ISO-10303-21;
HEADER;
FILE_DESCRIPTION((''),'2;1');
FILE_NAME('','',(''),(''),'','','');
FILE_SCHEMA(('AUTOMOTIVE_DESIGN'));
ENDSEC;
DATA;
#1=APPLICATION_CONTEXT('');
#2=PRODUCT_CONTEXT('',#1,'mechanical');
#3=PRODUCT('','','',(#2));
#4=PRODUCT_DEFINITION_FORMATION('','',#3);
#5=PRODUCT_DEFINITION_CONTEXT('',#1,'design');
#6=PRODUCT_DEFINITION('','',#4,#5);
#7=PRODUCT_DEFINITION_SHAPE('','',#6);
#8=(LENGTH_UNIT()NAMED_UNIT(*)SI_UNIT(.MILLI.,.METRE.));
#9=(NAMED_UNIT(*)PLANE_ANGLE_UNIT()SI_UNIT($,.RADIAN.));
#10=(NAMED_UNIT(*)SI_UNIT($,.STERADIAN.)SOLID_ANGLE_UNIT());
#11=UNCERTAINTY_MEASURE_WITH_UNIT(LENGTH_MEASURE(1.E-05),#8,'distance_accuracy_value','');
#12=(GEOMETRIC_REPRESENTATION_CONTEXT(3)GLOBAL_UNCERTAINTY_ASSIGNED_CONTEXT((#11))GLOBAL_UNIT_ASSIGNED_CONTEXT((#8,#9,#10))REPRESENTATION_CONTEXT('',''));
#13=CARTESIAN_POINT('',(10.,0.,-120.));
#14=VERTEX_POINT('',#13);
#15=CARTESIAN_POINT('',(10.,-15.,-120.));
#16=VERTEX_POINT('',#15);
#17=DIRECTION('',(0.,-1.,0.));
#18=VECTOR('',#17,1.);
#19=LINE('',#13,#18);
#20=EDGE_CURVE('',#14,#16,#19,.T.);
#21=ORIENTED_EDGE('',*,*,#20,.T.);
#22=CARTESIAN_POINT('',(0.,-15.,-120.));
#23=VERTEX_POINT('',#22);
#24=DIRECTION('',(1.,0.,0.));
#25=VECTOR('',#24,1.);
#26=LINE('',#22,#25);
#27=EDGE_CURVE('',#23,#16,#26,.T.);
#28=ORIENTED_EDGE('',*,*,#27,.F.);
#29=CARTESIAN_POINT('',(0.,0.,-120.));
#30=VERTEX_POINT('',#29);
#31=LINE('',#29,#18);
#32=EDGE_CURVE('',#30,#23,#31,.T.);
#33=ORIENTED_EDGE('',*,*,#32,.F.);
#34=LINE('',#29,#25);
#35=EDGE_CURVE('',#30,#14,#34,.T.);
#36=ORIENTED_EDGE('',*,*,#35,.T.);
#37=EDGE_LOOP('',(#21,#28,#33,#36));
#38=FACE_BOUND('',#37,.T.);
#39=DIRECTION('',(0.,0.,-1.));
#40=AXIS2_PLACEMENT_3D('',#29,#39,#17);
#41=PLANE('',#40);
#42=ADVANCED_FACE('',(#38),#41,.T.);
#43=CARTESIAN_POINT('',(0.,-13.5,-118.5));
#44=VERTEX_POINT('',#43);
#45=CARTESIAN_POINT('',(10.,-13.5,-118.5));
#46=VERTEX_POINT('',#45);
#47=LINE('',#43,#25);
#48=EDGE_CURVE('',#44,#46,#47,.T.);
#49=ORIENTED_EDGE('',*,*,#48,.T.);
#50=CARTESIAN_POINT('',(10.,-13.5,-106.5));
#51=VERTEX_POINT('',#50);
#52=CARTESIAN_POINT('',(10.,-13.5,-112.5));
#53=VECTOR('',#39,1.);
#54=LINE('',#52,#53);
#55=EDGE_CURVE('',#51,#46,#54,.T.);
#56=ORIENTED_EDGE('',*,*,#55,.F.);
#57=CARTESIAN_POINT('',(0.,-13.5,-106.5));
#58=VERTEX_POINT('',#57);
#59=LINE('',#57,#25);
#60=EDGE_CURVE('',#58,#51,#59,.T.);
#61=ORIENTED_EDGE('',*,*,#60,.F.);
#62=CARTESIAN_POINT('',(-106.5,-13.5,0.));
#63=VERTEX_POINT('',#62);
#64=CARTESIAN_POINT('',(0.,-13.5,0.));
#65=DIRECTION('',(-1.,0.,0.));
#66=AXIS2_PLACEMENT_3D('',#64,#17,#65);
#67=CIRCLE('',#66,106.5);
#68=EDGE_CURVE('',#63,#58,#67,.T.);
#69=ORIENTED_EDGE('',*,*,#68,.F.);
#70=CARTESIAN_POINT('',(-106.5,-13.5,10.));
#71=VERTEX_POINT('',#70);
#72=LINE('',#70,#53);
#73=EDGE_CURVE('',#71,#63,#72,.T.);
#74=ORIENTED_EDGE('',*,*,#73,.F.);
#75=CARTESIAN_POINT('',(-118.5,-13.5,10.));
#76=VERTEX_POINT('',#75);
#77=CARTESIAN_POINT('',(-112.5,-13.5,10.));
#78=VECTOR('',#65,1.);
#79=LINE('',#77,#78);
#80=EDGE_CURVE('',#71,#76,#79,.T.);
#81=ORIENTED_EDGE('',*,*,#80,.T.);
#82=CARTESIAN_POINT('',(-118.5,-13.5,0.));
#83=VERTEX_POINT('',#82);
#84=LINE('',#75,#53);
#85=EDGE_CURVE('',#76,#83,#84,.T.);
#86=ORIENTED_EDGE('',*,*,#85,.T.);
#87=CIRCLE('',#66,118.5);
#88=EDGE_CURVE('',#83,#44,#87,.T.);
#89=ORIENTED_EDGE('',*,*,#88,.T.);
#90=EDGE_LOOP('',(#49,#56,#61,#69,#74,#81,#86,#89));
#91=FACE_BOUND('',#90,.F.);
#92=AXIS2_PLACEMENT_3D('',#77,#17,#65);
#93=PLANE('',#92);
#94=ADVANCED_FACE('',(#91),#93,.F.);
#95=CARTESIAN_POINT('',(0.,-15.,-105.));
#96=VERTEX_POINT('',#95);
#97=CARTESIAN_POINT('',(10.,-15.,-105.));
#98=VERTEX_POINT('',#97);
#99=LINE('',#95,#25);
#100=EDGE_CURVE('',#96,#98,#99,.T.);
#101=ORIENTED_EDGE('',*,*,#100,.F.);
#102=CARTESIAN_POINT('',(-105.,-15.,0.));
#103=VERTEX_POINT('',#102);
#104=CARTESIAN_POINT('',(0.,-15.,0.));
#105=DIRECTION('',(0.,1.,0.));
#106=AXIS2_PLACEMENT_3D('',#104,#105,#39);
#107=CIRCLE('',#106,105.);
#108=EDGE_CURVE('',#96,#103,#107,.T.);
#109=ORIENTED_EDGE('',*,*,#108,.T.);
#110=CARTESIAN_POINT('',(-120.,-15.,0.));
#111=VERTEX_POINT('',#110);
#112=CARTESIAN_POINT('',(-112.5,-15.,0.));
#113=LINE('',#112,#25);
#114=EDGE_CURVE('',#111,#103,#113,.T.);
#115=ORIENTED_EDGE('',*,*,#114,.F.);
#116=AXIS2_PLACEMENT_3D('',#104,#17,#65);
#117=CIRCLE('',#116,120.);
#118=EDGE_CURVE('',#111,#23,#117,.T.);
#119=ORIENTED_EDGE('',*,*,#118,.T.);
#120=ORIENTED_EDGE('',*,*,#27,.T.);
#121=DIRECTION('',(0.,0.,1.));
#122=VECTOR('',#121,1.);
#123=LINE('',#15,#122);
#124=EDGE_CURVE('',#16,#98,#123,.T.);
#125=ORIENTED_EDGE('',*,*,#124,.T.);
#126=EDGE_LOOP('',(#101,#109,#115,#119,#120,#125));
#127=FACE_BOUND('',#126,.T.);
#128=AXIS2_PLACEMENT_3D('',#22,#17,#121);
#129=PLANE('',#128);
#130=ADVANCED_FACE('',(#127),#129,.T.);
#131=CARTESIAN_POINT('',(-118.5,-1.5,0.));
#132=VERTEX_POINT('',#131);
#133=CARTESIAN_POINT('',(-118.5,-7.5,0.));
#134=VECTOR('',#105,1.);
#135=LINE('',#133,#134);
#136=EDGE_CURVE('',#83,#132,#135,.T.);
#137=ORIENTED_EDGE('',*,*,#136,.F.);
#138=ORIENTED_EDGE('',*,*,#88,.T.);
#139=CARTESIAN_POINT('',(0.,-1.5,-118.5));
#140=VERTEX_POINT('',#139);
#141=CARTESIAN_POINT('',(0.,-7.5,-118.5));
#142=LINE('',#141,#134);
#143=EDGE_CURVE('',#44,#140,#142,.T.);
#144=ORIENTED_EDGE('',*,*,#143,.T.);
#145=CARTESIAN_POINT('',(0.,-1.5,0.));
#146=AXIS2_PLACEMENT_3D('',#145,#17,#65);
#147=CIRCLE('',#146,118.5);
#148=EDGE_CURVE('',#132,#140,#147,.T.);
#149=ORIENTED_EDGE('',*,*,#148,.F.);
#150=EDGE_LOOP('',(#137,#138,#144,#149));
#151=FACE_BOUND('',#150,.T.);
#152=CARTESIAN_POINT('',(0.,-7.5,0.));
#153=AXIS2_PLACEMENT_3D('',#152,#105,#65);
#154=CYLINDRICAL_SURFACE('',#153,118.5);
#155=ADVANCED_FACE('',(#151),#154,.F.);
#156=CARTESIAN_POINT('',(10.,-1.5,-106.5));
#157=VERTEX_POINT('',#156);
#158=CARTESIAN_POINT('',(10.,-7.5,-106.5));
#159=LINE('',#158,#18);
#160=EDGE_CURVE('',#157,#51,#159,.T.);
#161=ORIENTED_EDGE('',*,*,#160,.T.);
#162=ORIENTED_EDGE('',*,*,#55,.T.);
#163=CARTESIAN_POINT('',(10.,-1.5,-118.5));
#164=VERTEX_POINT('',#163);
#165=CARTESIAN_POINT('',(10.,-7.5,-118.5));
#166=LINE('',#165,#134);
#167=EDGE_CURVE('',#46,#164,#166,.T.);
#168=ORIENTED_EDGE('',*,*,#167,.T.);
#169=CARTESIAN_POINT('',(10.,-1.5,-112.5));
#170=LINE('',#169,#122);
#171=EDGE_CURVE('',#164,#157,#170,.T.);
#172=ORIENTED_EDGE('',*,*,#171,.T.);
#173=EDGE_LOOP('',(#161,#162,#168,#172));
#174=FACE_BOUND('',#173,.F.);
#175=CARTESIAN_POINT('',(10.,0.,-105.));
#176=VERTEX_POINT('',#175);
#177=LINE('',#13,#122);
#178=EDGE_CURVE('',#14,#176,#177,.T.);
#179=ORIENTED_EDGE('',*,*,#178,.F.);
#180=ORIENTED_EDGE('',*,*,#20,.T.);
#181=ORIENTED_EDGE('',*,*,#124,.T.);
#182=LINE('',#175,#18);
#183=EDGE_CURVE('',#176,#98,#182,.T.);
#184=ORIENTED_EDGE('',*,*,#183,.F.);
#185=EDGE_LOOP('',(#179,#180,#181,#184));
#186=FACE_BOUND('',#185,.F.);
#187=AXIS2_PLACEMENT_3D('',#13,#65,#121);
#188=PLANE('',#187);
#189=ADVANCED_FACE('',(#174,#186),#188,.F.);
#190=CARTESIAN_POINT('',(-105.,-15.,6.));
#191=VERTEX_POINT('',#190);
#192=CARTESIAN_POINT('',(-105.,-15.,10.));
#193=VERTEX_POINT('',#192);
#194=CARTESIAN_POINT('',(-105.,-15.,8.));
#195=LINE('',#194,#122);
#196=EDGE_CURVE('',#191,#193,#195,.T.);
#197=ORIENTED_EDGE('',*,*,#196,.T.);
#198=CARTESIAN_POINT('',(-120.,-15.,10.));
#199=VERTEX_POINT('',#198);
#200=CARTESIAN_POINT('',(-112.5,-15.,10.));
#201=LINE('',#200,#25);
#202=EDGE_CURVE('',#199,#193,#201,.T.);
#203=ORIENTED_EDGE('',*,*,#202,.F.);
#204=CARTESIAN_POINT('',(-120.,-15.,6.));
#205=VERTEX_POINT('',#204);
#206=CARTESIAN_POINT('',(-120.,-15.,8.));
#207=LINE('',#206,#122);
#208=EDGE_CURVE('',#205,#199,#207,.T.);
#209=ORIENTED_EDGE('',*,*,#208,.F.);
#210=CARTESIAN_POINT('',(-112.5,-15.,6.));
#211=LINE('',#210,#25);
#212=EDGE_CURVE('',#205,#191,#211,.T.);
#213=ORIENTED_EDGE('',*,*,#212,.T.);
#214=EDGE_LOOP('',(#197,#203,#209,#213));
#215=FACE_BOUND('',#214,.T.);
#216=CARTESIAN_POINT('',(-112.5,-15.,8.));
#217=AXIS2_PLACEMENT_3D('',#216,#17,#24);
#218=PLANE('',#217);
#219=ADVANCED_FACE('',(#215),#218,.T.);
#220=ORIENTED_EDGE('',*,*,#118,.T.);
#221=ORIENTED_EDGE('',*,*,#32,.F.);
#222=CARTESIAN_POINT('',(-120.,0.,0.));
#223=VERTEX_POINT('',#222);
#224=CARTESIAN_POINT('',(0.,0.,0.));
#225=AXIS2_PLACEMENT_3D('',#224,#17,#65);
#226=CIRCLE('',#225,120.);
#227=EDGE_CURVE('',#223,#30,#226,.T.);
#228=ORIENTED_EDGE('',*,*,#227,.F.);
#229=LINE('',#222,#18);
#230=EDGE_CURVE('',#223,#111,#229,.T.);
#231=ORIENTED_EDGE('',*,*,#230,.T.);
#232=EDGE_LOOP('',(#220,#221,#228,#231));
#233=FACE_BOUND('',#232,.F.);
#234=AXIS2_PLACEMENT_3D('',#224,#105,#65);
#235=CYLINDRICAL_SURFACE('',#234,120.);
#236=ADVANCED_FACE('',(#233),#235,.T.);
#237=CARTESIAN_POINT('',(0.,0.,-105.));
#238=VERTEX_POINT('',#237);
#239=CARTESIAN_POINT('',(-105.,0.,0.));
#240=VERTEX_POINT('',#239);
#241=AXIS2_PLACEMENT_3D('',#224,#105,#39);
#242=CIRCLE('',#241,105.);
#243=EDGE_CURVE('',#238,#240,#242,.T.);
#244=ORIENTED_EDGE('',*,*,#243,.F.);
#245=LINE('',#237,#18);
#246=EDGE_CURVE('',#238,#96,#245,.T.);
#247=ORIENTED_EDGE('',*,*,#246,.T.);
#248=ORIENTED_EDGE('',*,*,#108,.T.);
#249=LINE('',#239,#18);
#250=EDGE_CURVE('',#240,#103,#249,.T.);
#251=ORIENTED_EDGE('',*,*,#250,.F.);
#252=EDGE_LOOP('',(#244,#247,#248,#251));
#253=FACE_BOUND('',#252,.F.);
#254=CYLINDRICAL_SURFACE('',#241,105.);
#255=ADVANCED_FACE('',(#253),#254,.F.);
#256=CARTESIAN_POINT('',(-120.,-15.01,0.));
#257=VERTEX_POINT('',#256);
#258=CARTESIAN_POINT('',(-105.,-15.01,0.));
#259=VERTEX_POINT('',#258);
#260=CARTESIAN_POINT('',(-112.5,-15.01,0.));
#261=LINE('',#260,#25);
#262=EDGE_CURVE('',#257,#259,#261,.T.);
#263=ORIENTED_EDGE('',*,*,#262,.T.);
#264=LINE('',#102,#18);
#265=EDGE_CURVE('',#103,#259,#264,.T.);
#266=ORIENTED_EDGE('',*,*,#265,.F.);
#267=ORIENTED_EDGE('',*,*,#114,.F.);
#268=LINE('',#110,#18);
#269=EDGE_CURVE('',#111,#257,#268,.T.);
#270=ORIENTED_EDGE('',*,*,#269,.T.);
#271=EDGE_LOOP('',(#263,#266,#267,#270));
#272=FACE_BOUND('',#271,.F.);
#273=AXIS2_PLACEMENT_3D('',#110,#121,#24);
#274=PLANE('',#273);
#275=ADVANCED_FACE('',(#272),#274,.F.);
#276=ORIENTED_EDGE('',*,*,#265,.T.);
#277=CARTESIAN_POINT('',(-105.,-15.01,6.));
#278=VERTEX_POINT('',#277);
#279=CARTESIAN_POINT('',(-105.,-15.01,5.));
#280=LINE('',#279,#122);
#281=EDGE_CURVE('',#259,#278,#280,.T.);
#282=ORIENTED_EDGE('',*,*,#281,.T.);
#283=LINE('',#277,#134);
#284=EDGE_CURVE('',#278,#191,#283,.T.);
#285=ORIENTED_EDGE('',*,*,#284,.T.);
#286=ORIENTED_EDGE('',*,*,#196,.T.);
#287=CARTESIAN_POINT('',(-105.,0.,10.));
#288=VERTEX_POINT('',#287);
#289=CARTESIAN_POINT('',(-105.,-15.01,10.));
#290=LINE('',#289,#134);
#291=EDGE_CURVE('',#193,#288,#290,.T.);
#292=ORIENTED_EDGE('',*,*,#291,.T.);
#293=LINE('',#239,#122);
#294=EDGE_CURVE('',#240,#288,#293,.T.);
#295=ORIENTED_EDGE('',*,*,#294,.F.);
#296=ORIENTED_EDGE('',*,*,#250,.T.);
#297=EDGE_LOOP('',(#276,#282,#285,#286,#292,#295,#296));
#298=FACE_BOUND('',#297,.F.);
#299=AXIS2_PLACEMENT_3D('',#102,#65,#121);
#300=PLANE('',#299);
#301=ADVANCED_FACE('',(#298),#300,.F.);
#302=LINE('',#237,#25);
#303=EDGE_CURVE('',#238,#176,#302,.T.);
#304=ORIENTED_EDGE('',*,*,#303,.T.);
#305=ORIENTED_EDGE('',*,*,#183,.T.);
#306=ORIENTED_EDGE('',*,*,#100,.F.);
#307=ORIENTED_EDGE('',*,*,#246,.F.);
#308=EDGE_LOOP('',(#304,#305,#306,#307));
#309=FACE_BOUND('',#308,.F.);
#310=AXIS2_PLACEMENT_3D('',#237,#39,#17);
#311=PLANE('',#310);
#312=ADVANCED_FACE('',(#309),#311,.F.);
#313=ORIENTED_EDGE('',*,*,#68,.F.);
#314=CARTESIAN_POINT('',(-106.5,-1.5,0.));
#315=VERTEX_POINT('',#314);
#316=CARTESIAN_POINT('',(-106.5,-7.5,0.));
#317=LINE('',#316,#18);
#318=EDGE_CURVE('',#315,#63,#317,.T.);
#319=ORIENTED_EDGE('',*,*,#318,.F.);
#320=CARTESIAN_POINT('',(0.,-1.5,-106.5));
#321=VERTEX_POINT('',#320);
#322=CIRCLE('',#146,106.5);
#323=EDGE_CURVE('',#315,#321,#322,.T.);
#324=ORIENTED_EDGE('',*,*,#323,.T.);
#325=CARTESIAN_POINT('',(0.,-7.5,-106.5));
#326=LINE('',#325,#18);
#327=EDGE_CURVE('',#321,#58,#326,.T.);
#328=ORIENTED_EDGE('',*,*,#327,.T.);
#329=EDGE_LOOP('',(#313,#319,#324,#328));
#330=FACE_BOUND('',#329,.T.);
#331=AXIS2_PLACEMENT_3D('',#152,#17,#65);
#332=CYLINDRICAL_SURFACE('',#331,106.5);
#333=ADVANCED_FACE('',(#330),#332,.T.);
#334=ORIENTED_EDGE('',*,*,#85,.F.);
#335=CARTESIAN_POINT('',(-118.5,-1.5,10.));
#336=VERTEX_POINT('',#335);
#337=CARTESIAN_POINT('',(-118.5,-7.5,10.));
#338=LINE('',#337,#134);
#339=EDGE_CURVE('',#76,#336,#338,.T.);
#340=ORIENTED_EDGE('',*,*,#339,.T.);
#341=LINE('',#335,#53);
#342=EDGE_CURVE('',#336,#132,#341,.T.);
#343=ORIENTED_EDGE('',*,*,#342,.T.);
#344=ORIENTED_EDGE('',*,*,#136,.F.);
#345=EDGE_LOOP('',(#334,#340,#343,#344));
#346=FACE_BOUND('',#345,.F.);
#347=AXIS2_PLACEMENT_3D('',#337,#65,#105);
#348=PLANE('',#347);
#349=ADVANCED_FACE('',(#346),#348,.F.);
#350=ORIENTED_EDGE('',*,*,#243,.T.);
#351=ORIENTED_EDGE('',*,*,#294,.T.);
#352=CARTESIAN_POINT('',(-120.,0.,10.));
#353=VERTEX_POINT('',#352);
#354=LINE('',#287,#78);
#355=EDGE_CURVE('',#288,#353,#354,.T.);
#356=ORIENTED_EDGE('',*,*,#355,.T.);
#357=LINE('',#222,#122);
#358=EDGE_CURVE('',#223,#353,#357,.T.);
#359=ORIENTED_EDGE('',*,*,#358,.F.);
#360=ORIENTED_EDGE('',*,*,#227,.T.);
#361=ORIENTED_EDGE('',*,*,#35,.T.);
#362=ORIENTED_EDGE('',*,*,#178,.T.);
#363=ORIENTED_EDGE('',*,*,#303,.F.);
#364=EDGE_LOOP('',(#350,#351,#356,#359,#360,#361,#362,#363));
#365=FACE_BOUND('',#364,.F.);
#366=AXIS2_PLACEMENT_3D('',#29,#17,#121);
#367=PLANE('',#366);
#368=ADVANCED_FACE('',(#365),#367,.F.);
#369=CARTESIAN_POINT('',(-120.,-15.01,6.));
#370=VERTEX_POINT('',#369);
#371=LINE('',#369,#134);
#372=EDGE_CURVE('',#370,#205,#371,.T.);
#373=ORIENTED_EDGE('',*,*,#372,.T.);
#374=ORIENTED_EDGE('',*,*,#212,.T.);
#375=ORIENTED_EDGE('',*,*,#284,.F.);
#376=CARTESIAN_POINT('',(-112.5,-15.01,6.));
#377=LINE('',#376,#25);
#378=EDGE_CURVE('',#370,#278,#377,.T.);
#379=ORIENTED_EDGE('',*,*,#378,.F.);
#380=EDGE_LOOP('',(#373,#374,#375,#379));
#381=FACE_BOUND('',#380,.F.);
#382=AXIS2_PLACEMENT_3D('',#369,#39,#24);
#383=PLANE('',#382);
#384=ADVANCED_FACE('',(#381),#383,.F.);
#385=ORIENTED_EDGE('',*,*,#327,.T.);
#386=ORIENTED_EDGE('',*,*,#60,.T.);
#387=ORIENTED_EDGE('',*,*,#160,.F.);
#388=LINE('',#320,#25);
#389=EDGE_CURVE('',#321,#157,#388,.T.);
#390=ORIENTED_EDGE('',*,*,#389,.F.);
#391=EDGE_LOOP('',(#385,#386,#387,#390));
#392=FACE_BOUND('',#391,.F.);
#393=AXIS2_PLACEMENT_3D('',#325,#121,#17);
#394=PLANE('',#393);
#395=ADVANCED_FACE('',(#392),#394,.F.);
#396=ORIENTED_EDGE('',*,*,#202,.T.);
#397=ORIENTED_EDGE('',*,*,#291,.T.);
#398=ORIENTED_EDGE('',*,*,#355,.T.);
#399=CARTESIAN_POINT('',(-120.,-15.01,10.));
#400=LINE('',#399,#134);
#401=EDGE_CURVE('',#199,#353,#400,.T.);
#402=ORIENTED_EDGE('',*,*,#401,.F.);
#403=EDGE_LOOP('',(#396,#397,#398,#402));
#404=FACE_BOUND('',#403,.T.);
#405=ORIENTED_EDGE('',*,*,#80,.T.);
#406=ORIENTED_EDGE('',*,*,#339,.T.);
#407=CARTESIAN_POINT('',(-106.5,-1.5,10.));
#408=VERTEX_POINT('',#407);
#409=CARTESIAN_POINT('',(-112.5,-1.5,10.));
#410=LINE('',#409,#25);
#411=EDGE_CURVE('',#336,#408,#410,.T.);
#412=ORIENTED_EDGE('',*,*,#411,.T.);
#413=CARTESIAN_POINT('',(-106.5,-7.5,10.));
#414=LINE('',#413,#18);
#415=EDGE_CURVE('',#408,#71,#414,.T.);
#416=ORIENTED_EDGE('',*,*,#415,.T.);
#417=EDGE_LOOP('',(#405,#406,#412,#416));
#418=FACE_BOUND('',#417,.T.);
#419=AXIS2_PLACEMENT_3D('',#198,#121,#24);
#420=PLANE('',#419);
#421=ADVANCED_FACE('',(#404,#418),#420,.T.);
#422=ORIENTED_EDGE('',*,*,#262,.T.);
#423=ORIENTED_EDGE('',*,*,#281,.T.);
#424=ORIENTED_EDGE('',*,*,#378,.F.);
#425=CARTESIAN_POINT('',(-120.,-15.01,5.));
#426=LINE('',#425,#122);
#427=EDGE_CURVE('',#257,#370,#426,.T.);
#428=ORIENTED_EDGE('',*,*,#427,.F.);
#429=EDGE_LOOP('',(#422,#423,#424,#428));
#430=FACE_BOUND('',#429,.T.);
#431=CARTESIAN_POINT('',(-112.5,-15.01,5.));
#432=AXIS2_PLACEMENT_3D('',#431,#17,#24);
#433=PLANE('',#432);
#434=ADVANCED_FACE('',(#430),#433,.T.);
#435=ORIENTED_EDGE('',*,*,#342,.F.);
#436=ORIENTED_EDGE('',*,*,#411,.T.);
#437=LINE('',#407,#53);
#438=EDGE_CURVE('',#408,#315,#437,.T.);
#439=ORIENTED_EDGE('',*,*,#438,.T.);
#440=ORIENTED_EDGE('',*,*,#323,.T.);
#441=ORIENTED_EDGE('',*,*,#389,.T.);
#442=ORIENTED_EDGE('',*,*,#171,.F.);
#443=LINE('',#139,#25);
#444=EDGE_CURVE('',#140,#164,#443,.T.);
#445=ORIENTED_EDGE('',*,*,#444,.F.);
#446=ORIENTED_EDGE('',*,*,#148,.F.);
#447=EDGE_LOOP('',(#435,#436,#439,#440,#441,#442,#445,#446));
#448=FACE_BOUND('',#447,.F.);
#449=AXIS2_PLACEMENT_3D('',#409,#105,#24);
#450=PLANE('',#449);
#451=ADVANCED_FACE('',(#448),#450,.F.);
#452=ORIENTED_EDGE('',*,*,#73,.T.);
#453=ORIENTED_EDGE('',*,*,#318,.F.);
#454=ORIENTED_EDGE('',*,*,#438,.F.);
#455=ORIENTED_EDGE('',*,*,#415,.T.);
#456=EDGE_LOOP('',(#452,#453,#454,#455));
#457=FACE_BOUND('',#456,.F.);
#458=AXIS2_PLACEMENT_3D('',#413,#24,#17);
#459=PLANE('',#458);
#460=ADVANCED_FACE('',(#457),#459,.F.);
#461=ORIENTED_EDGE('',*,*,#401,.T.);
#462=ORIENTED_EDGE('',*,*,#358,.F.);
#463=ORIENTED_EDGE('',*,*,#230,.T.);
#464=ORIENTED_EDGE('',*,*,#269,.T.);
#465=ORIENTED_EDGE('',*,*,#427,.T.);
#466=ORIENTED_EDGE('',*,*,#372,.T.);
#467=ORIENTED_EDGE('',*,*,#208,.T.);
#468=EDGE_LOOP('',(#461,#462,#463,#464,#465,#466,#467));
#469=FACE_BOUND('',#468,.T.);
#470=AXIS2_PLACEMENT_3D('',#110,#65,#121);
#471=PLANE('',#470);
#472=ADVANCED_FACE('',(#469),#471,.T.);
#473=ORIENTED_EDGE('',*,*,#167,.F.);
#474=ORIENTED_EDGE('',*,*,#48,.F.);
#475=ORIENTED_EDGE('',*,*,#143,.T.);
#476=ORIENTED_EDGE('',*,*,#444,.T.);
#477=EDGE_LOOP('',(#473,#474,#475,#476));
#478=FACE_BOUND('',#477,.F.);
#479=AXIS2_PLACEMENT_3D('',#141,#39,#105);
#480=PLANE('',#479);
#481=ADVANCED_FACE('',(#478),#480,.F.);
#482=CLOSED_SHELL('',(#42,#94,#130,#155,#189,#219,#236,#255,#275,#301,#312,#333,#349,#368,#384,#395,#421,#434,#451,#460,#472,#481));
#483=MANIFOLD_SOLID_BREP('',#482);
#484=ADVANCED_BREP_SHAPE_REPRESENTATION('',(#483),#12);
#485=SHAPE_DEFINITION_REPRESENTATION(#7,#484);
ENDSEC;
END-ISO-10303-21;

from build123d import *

# Parameters (mm, degrees)
F1_DEPTH = 15
F2_DEPTH = 10
F3_DEPTH = 10
F4_W     = 15
F4_H     = 10
F5_DEPTH = 0.01
F6_W     = 15
F6_H     = 4
F7_DEPTH = 0.01
F8_W     = 12
F8_H     = 12


with BuildPart() as f1:
    # F0 (on Front) → F1 (new body)
    with BuildSketch(Plane.XZ):
        with BuildLine():
            Line((-105, 0), (-120, 0))
            ThreePointArc((-120, 0), (-84.8528137424, -84.8528137424), (0, -120))
            Line((0, -120), (0, -105))
            ThreePointArc((0, -105), (-74.2462120246, -74.2462120246), (-105, 0))
        make_face()
    extrude(amount=F1_DEPTH)

    # F2 (add): a face of the model
    f2_faces = [f1.faces().sort_by_distance(p)[0] for p in [
        (-112.5, -7.5, 0),
    ]]
    extrude(f2_faces, amount=F2_DEPTH)

    # F3 (add): a face of the model
    f3_faces = [f1.faces().sort_by_distance(p)[0] for p in [
        (0, -7.5, -112.5),
    ]]
    extrude(f3_faces, amount=F3_DEPTH)

    # F4 (on face) → F5 (join)
    with BuildSketch(Plane.XZ.offset(15)):
        with Locations((-112.5, 5)):
            Rectangle(F4_W, F4_H)
    extrude(amount=F5_DEPTH)

    # F6 (on face) → F7 (cut)
    with BuildSketch(Plane.XZ.offset(15.01)):
        with Locations((-112.5, 8)):
            Rectangle(F6_W, F6_H)
    extrude(amount=-F7_DEPTH, mode=Mode.SUBTRACT)

    # F9: sweep along a path in F9_path
    with BuildLine(Plane(origin=(-105, 0, 0), x_dir=(0, 0, -1), z_dir=(0, 1, 0))) as f9_path:
        Line((-10, 0), (0, 0))
        ThreePointArc((0, 0), (74.2462120246, -30.7537879754), (105, -105))
        Line((105, -105), (105, -115))
    # F8 (on face) → F9 (sweep, cut)
    with BuildSketch(Plane.YZ.offset(10)):
        with Locations((-7.5, -112.5)):
            Rectangle(F8_W, F8_H)
    sweep(path=f9_path.line, mode=Mode.SUBTRACT)


solid = f1.part
